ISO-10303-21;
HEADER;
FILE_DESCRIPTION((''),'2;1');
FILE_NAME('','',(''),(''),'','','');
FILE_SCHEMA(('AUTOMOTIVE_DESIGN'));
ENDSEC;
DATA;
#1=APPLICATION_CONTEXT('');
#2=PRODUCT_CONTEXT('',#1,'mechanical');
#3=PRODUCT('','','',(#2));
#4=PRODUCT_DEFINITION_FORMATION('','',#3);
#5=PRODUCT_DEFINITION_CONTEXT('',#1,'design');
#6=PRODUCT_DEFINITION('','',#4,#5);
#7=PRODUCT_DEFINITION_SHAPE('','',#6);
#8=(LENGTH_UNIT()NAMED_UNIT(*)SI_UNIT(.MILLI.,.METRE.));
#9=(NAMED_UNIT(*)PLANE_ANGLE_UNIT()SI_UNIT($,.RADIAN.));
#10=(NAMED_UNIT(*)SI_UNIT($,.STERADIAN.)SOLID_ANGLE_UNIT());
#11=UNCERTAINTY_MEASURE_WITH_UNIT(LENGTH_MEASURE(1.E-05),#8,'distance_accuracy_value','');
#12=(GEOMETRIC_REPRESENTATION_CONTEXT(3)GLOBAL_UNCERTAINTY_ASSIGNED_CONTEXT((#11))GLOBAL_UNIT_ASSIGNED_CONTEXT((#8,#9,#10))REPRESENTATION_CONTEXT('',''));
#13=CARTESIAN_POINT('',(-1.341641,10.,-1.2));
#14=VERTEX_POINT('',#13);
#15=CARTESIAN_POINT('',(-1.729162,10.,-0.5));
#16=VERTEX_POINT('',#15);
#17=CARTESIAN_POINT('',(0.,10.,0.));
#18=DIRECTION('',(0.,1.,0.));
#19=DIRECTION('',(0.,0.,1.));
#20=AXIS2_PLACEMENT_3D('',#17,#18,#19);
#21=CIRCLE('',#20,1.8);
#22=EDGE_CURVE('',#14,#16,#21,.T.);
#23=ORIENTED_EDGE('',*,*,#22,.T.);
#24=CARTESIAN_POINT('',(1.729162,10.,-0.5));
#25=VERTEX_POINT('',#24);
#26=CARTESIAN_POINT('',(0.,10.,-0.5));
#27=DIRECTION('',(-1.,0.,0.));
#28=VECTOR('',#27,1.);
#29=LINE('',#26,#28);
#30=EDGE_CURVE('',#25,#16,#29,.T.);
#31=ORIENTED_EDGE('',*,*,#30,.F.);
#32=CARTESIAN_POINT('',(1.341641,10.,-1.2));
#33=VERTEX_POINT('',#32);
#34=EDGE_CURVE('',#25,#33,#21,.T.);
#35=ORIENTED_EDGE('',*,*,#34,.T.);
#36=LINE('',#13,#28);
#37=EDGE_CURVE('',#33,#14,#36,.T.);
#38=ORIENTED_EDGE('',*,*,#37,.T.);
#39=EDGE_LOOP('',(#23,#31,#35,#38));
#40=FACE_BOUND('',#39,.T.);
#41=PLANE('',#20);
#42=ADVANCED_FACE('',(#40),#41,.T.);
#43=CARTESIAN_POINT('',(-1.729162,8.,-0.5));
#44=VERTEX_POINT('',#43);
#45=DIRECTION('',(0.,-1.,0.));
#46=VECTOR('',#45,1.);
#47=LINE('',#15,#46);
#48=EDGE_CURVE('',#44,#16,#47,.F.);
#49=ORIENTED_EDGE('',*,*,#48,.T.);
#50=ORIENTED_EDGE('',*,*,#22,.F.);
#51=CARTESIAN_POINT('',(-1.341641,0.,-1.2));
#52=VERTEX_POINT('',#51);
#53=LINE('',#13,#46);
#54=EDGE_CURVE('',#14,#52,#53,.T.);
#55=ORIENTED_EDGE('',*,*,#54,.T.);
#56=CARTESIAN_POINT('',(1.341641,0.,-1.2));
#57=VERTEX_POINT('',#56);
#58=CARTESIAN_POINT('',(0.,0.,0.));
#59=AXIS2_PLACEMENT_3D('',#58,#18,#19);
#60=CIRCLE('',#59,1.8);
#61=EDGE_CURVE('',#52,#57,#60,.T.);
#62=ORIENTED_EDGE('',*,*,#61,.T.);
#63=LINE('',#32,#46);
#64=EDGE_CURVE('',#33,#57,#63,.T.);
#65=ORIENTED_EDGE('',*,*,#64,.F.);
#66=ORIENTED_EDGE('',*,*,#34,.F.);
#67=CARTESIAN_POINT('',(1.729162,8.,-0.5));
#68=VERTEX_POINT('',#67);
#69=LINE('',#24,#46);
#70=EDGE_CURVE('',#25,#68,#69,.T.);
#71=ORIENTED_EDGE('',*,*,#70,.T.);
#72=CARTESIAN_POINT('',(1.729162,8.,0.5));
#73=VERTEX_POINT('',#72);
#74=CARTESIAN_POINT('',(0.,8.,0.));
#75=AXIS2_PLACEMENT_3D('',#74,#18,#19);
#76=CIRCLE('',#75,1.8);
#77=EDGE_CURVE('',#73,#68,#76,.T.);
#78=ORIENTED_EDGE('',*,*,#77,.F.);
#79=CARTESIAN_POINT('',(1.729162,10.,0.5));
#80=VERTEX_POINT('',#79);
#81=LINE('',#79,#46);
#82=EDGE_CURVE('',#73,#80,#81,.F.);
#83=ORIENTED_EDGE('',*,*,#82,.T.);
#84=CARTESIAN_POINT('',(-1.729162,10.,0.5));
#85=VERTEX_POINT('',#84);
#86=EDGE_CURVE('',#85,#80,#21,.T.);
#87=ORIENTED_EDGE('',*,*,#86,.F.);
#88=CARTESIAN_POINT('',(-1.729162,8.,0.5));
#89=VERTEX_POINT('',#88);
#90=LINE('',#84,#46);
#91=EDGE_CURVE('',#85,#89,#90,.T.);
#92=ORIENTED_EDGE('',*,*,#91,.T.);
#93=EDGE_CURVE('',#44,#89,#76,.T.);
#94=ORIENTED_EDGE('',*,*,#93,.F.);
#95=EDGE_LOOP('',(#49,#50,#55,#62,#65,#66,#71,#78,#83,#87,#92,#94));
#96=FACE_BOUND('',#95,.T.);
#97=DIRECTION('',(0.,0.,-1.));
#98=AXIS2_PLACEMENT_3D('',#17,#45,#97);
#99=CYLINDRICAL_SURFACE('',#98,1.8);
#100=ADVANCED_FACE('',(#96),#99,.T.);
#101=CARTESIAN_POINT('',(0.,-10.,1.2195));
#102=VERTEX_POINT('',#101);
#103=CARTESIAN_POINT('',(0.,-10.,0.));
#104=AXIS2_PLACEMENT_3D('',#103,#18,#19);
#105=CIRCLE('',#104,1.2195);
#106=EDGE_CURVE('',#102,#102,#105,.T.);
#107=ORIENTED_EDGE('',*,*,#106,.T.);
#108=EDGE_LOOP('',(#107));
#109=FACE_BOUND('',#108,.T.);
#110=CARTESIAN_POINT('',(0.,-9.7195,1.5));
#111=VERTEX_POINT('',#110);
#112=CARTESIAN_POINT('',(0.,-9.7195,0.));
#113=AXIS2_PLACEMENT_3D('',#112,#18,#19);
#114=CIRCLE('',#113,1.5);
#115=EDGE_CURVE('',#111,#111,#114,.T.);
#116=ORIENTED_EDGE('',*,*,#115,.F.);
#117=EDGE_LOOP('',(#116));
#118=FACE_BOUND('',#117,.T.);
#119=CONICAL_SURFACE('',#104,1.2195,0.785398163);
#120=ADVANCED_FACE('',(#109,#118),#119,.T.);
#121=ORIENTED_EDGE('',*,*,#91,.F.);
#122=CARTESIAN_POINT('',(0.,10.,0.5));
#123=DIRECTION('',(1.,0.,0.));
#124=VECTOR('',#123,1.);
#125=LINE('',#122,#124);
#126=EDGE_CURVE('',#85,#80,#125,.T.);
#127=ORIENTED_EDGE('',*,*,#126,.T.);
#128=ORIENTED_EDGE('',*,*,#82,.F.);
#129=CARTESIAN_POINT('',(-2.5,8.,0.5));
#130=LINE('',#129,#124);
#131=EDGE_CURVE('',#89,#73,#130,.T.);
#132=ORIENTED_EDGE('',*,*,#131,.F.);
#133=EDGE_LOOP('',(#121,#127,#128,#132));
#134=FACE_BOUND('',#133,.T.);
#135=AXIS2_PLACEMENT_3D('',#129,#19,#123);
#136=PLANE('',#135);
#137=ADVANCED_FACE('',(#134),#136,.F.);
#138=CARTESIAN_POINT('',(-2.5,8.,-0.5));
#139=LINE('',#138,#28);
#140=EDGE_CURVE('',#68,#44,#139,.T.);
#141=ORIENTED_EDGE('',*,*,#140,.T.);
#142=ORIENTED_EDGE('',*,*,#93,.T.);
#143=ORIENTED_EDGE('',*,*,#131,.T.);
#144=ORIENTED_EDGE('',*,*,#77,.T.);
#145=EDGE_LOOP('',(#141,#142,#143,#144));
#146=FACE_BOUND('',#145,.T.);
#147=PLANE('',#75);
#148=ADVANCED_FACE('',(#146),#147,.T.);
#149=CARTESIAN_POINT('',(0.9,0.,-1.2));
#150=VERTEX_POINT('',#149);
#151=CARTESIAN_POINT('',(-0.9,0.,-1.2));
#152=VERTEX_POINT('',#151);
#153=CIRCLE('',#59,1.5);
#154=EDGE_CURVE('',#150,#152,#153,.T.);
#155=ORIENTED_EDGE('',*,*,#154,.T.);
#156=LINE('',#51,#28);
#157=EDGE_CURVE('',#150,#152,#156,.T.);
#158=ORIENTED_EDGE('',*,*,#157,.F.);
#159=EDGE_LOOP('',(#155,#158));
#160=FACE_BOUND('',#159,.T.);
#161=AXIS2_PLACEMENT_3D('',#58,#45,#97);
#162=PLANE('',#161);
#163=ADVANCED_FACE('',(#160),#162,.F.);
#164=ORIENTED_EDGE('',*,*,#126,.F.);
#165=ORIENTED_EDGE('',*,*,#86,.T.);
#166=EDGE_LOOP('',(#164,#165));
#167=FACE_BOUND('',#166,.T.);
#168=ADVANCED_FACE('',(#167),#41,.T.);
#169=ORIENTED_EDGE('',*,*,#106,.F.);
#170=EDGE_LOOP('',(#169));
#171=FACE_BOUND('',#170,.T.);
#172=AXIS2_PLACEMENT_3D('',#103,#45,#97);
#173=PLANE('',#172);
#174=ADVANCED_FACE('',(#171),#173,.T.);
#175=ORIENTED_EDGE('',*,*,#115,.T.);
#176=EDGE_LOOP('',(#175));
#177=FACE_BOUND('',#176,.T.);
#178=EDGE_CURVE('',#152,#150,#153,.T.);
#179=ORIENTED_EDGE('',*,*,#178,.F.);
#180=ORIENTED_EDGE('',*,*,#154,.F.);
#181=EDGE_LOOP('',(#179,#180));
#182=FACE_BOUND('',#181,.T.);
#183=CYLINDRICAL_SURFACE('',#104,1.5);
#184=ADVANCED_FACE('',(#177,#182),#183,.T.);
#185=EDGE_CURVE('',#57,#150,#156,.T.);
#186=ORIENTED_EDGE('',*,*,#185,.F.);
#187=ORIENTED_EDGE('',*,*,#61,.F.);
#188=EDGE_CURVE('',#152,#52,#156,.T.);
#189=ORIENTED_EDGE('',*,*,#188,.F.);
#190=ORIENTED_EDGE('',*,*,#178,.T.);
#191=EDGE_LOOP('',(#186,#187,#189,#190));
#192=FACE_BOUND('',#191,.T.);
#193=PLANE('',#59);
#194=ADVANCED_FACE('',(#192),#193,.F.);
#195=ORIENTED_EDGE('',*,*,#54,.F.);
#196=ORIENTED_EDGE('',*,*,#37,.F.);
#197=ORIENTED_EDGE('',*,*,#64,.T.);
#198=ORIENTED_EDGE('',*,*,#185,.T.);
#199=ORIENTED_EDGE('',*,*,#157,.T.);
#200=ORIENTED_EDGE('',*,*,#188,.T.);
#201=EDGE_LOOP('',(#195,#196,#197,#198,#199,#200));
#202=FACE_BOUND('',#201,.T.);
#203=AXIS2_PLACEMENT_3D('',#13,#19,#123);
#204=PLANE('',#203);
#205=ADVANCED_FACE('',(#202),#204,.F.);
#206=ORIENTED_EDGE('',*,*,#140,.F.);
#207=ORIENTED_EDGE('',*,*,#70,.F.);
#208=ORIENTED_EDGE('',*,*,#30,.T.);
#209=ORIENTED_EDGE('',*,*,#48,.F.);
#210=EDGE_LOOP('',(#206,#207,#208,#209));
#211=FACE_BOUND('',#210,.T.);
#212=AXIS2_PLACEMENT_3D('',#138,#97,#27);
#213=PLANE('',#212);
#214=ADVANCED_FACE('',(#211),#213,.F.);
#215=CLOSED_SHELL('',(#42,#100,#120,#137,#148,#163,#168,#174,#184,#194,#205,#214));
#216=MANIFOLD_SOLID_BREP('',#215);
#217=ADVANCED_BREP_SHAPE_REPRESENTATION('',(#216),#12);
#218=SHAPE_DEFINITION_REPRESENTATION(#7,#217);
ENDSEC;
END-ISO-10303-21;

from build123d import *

# Parameters (mm, degrees)
BOSS_EXTRUDE1_DEPTH = 10
SKETCH2_W           = 5
SKETCH2_H           = 1
CUT_EXTRUDE1_DEPTH  = 2
SKETCH3_R           = 1.6
BOSS_EXTRUDE2_DEPTH = 10


# Read off the part's stored shape, not the designer's step: M3 Machine Threads Stud1
with BuildPart() as part:
    # Sketch1 → Boss-Extrude1 (new body)
    with BuildSketch(Plane(origin=(0, 0, 0), x_dir=(1, 0, 0), z_dir=(0, 1, 0))):
        with BuildLine():
            Line((-1.341640786, 1.2), (1.341640786, 1.2))
            ThreePointArc((1.341640786, 1.2), (0, -1.8), (-1.341640786, 1.2))
        make_face()
    extrude(amount=BOSS_EXTRUDE1_DEPTH)

    # Sketch2 → Cut-Extrude1 (cut)
    with BuildSketch(Plane(origin=(0, 10, 0), x_dir=(1, 0, 0), z_dir=(0, 1, 0))):
        Rectangle(SKETCH2_W, SKETCH2_H)
    extrude(amount=-CUT_EXTRUDE1_DEPTH, mode=Mode.SUBTRACT)

    # Sketch3 → Boss-Extrude2 (add)
    with BuildSketch(Plane.XZ):
        with Locations(Location((0, 0, 0), (0, 0, 228.590377891))):
            Circle(SKETCH3_R)
    extrude(amount=BOSS_EXTRUDE2_DEPTH)

    # M3 Machine Threads Stud1 outline → M3 Machine Threads Stud1 (revolve, cut)
    with BuildSketch(Plane.XY):
        Polygon((1.6, 0), (1.5, 0), (1.5, -9.7195), (1.2195, -10), (1.6, -10), align=None)
    revolve(axis=Axis((0, 0, 0), (0, 1, 0)), mode=Mode.SUBTRACT)


solid = part.part
